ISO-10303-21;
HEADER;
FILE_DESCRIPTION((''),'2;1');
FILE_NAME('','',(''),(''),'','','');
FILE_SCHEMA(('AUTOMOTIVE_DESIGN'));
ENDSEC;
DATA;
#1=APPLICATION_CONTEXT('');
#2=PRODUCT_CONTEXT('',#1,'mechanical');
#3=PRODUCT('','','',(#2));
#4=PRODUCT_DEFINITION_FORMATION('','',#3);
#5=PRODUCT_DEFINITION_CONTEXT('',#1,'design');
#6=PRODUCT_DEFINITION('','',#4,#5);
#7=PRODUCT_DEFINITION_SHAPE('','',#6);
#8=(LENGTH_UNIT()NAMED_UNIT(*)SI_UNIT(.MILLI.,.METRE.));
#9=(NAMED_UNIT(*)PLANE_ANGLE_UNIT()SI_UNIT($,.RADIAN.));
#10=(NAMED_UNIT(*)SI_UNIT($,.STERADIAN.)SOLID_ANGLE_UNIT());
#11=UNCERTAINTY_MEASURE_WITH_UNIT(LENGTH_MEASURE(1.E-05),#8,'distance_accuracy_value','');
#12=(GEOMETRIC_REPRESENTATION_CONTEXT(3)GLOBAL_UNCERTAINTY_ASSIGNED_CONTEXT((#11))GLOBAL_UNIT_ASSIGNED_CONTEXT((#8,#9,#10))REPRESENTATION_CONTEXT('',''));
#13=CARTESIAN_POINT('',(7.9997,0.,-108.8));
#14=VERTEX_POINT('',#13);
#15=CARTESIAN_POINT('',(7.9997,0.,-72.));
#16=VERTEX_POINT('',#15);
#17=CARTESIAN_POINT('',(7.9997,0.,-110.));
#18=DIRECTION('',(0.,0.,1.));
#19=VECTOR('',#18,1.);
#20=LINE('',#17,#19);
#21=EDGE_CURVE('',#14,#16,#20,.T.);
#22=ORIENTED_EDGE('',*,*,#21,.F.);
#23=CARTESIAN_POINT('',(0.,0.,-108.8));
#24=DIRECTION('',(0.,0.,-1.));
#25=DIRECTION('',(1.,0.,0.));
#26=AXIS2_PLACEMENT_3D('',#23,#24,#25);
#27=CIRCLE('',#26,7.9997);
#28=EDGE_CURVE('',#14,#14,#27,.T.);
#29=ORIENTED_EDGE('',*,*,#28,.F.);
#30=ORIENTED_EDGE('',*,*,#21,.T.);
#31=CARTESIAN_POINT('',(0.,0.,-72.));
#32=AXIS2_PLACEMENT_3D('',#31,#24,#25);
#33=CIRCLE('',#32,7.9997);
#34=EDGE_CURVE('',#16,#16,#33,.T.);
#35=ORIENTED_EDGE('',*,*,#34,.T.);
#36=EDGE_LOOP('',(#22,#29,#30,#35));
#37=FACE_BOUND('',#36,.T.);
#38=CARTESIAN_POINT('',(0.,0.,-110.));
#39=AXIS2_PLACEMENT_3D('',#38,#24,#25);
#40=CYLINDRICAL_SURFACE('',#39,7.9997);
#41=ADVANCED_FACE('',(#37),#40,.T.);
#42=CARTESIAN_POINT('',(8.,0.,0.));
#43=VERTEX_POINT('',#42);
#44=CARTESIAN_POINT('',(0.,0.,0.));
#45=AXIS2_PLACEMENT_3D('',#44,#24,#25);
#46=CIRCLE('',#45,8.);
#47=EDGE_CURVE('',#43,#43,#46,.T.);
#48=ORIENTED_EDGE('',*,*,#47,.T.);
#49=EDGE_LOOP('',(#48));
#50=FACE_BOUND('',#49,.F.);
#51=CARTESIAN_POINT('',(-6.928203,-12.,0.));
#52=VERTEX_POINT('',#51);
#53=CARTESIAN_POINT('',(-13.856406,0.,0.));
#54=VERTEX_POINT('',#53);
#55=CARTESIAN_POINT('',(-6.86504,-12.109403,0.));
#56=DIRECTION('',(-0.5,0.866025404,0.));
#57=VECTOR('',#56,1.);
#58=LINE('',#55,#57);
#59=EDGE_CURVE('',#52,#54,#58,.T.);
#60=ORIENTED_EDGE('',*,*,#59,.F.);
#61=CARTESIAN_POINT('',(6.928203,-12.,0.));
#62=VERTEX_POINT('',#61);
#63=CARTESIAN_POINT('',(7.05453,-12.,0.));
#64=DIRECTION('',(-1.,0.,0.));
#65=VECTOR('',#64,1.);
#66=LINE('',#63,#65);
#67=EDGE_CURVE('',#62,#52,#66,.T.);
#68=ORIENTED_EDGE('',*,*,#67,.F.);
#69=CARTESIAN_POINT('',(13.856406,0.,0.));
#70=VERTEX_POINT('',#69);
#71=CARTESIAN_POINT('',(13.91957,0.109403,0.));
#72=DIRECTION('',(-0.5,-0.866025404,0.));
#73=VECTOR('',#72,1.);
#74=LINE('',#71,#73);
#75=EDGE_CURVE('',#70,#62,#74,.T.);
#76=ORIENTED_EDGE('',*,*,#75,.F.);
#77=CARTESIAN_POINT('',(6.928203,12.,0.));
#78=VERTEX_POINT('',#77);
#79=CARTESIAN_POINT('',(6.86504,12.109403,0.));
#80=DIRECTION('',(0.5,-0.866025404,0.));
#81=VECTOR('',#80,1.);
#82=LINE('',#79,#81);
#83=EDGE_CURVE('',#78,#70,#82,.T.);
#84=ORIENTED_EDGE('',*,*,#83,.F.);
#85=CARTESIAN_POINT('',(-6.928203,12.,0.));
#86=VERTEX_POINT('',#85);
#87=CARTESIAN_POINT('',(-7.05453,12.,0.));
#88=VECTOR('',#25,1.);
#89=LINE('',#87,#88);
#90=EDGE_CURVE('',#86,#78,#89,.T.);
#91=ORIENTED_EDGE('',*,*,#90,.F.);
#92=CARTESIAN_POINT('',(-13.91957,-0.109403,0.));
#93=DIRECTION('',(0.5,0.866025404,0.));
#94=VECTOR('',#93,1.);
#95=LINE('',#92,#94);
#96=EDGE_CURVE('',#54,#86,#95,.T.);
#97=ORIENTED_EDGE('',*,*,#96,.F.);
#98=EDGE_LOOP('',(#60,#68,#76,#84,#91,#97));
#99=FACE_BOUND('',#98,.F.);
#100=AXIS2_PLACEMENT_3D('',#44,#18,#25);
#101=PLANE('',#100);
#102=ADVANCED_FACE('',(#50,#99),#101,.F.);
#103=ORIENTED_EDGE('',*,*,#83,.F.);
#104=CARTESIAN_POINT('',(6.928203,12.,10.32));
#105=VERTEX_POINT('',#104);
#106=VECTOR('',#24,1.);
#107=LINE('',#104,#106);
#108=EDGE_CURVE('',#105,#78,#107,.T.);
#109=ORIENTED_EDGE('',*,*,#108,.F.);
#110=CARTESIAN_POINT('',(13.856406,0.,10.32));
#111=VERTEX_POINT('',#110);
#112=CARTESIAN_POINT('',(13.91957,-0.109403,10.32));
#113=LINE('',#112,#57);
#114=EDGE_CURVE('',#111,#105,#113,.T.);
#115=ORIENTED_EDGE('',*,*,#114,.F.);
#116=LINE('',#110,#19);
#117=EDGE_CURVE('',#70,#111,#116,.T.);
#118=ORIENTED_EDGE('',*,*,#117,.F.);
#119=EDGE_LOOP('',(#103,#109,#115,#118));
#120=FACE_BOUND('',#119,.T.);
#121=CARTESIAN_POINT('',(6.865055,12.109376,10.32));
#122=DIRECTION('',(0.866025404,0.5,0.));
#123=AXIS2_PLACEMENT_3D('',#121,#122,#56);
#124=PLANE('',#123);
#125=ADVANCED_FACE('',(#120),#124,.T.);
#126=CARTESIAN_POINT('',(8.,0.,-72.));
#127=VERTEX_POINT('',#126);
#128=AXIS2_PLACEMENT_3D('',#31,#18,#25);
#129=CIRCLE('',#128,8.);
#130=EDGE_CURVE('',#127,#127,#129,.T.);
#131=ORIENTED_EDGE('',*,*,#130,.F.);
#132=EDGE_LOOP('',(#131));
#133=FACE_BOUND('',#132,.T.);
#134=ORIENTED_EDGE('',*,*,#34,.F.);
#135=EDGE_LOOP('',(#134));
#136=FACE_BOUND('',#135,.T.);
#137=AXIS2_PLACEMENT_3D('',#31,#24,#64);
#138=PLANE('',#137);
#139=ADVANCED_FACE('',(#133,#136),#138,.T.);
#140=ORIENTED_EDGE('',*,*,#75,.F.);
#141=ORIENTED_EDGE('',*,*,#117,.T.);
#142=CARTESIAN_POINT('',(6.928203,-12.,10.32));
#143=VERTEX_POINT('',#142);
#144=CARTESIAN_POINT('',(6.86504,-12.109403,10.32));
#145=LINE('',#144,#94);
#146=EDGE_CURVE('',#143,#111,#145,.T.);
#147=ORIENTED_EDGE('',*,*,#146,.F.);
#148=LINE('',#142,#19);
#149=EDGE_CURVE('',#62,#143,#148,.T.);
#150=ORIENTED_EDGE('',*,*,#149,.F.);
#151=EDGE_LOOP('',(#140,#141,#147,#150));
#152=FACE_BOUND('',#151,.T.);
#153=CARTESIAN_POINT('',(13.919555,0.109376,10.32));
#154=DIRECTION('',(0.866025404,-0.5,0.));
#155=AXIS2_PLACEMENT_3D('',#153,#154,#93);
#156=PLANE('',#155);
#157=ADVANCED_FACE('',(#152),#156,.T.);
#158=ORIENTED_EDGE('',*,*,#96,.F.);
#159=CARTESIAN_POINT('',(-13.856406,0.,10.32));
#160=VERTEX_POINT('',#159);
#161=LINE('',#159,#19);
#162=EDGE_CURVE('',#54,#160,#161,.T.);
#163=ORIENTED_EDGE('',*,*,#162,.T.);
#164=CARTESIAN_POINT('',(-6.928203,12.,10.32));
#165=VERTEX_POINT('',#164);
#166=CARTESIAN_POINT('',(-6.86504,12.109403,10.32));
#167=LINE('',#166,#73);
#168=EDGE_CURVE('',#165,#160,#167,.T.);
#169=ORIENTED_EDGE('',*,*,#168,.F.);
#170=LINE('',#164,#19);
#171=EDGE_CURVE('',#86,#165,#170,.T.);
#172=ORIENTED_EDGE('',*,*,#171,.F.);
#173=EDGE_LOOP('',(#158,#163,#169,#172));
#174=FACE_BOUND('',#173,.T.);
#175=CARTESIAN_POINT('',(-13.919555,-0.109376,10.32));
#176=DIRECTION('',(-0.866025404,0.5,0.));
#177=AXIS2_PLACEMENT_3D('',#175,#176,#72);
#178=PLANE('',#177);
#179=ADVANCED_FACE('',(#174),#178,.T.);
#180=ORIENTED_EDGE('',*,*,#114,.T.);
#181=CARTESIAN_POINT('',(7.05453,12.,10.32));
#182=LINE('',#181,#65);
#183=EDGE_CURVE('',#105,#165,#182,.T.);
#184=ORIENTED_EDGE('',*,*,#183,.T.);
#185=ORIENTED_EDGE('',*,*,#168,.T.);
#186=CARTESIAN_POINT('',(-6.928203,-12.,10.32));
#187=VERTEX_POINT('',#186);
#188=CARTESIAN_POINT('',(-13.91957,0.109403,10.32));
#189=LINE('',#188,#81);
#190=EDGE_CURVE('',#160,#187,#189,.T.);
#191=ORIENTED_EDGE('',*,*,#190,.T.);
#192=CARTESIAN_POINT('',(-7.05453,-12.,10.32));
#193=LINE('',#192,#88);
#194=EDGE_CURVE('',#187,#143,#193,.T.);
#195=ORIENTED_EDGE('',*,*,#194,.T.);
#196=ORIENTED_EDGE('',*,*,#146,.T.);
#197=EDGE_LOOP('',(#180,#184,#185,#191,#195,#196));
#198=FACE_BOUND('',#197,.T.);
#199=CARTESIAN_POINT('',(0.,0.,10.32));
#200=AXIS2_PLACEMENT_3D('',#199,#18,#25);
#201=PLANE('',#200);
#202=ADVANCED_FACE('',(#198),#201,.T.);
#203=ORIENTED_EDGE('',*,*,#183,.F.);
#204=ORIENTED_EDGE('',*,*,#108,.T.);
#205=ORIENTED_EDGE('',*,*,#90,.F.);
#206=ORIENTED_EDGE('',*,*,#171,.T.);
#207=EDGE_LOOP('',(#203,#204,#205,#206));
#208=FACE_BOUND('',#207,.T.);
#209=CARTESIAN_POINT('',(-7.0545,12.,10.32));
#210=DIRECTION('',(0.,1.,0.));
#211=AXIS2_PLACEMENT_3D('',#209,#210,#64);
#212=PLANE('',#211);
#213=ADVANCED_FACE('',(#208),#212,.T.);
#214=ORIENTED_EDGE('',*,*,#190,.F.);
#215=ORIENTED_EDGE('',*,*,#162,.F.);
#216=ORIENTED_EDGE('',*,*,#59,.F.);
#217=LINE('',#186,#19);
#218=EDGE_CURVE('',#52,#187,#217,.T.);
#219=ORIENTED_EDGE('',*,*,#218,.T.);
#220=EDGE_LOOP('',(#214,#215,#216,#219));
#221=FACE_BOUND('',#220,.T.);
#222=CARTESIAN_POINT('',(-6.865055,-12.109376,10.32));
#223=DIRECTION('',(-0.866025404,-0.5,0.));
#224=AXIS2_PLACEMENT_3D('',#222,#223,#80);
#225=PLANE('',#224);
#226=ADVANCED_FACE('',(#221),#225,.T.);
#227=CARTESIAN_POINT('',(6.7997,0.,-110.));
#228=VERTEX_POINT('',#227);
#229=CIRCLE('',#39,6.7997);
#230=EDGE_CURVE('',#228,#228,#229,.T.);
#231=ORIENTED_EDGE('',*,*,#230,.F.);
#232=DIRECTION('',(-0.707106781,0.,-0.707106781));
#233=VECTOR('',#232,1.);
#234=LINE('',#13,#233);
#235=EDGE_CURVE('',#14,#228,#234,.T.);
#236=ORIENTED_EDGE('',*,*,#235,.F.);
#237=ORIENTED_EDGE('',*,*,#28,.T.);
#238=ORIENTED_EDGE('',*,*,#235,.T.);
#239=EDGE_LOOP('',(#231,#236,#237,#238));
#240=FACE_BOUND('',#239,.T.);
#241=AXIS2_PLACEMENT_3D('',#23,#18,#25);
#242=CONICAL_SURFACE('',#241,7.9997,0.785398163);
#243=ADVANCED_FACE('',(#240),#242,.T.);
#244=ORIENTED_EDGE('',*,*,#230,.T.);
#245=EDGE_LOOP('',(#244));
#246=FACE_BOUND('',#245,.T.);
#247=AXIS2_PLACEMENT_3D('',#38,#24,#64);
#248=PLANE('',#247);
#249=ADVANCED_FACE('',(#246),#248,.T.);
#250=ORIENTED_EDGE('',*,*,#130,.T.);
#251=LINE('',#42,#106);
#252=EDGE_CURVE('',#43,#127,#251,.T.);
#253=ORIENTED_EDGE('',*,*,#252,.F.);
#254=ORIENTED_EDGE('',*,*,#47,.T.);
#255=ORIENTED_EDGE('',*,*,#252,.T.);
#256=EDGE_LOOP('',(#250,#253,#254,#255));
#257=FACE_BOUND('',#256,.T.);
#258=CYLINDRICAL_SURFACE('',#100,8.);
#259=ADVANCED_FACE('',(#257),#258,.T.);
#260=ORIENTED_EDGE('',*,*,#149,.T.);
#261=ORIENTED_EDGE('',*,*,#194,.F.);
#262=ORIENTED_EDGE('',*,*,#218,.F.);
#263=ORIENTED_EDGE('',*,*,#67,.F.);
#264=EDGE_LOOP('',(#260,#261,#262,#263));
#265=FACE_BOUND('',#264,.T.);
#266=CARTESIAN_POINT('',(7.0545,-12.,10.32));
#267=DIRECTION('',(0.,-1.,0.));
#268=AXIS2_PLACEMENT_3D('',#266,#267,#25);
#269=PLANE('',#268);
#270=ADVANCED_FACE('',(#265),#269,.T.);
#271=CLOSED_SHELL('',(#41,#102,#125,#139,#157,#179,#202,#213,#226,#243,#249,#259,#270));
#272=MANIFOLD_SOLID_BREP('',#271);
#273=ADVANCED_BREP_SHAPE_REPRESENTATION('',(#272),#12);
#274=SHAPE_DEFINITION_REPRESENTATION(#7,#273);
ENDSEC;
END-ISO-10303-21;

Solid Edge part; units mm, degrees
sketch "Sketch1" plane through (0, 0, 0) normal (0, 0, 1) x (1, 0, 0)
  circle A0 centre (0, 0) radius 13.92
  dimension "D1" = 27.84
extrude "Protrusion1" add sketch "Sketch1" along normal blind 10.32
sketch "Sketch2" plane through (0, 0, 0) normal (0, 0, -1) x (1, 0, 0)
  circle A0 centre (0, 0) radius 8
extrude "Protrusion2" add sketch "Sketch2" along normal blind 110
sketch "Sketch3" plane through (0, 0, -110) normal (0, 0, -1) x (1, 0, 0)
  circle A0 centre (0, 0) radius 7.9997
extrude "Cutout1" cut sketch "Sketch3" against normal blind 38 flip side to cut
chamfer "Chamfer_1" distance 1.2 angle 45 1 edges at (-7.9997, 0, -110)
sketch "Sketch4" plane through (0, 0, 10.32) normal (0, 0, 1) x (1, 0, 0)
  line L0 (-7.0545, 12) -> (7.0545, 12)
  dimension "D1" = 24
extrude "Cutout2" cut sketch "Sketch4" against normal up to next material side at (0, 12.05, 10.32)
pattern_circular "Pattern1" count 6 over 360 about axis through (0, 0, 10.32) along (0, 0, 1) of "Cutout2"
properties part number "113602"
